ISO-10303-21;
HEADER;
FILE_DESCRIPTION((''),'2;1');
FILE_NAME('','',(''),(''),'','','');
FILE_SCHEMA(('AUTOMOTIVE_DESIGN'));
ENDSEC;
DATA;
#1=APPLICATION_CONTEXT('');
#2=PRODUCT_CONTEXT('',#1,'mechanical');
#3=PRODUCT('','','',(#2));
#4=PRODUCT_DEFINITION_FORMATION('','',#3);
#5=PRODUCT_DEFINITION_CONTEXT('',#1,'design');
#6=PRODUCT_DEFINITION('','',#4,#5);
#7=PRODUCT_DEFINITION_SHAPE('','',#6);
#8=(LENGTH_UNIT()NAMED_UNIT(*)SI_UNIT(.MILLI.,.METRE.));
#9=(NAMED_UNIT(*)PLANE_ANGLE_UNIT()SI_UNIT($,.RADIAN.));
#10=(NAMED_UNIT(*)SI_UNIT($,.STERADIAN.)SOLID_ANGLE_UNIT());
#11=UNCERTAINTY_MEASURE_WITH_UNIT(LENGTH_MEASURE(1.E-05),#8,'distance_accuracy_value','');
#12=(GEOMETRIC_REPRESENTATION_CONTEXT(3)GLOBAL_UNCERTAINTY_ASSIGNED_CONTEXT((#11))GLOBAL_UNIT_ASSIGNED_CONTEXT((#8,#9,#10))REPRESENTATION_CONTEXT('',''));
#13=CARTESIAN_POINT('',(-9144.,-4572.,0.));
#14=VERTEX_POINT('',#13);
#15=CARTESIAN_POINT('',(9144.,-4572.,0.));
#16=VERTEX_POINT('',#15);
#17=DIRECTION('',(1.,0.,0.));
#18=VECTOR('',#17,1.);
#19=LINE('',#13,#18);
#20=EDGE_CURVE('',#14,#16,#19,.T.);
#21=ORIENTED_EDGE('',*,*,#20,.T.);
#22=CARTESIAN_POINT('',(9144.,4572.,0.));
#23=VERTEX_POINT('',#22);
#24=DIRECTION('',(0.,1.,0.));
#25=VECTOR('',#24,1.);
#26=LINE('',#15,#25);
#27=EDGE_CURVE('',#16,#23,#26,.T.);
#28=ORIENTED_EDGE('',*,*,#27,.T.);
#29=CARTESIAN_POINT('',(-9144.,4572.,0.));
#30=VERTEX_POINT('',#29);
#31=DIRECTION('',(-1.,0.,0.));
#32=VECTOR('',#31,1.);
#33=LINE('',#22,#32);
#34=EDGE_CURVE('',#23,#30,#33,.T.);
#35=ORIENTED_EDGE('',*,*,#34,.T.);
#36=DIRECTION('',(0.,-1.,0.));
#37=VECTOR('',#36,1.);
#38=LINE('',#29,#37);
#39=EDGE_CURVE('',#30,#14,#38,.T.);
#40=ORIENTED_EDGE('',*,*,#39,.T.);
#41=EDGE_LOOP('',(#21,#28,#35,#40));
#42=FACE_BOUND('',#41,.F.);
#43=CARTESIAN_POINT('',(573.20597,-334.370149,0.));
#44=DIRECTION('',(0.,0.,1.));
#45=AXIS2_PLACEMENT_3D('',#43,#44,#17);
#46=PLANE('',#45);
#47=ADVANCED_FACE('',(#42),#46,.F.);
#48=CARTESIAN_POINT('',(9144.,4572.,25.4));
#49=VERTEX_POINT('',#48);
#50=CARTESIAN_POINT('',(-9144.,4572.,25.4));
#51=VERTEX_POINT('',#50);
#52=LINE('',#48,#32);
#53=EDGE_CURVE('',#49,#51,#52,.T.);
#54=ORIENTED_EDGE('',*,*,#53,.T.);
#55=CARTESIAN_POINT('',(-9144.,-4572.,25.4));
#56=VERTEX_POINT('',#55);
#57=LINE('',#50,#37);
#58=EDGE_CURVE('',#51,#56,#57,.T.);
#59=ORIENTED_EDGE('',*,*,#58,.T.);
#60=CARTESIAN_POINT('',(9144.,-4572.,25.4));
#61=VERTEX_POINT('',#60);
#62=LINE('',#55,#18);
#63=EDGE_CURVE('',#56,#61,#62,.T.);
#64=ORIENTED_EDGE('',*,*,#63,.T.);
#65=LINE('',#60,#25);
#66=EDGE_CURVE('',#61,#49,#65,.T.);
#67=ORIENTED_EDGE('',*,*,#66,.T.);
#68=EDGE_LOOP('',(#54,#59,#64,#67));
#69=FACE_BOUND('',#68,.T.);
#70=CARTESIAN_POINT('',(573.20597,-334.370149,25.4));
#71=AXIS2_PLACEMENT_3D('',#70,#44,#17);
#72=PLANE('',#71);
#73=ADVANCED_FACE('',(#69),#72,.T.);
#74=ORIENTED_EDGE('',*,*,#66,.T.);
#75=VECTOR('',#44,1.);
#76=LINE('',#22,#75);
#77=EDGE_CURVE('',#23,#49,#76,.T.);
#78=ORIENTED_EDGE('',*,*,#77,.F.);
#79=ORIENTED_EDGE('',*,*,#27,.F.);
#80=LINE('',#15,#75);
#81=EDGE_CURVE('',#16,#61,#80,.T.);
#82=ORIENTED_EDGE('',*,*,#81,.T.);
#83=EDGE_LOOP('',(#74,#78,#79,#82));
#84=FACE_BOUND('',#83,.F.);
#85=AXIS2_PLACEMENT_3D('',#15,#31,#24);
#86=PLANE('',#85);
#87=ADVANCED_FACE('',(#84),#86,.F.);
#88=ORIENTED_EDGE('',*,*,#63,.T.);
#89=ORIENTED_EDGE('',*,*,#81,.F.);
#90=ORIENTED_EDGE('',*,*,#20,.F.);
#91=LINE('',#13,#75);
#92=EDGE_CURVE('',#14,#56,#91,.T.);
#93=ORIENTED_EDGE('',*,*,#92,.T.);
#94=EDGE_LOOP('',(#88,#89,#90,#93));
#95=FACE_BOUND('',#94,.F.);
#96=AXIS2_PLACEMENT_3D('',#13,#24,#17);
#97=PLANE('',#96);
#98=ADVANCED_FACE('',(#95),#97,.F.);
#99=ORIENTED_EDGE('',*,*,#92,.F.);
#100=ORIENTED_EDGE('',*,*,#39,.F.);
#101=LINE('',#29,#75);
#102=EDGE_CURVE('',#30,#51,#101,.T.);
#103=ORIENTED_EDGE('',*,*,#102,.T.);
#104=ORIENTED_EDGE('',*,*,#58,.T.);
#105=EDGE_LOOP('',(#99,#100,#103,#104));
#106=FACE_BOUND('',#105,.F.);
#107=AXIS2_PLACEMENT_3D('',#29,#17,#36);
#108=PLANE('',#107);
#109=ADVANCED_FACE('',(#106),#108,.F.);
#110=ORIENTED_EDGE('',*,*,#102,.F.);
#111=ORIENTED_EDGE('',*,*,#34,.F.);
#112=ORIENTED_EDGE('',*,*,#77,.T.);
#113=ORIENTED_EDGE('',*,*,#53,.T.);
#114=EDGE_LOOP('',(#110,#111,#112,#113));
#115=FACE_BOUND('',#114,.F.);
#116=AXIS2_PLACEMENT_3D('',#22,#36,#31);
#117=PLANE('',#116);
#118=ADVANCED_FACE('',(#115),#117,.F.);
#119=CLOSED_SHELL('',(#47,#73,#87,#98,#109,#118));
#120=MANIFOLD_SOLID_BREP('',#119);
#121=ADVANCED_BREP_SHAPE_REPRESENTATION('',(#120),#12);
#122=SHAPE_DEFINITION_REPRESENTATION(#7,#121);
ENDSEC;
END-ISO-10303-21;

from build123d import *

# Parameters (mm, degrees)
F0_W     = 3962.4
F0_H     = 4572
F0_W_2   = 3048
F0_H_2   = 1828.8
F4_DEPTH = 25.4


# Not quite as in the source:
# - the program builds the solid bodies; features that only make, move or delete a surface that nothing else refers to are left out


with BuildPart() as f4:
    # F0 (on Top) → F4 (new body)
    with BuildSketch(Plane.XY):
        Polygon((4876.8, 914.4), (4876.8, 4572), (-3048, 4572), (-3048, 0), (-3048, -1828.8), (-5181.6, -1828.8), (-5181.6, -4572), (4876.8, -4572), (4876.8, -914.4), (6096, -914.4), (6096, 914.4), align=None)
        with Locations((-5029.2, 2286)):
            Rectangle(F0_W, F0_H)
        Polygon((-3048, -1828.8), (-3048, 0), (-7010.4, 0), (-7010.4, -1828.8), (-5181.6, -1828.8), align=None)
        Polygon((-7010.4, 0), (-7010.4, 4572), (-9144, 4572), (-9144, -1828.8), (-7010.4, -1828.8), align=None)
        Polygon((-7010.4, -1828.8), (-9144, -1828.8), (-9144, -4572), (-5181.6, -4572), (-5181.6, -1828.8), align=None)
        Polygon((9144, 914.4), (9144, 4572), (4876.8, 4572), (4876.8, 914.4), (6096, 914.4), align=None)
        with Locations((7620, 0)):
            Rectangle(F0_W_2, F0_H_2)
        Polygon((9144, -4572), (9144, -914.4), (6096, -914.4), (4876.8, -914.4), (4876.8, -4572), align=None)
    extrude(amount=F4_DEPTH)


solid = f4.part
